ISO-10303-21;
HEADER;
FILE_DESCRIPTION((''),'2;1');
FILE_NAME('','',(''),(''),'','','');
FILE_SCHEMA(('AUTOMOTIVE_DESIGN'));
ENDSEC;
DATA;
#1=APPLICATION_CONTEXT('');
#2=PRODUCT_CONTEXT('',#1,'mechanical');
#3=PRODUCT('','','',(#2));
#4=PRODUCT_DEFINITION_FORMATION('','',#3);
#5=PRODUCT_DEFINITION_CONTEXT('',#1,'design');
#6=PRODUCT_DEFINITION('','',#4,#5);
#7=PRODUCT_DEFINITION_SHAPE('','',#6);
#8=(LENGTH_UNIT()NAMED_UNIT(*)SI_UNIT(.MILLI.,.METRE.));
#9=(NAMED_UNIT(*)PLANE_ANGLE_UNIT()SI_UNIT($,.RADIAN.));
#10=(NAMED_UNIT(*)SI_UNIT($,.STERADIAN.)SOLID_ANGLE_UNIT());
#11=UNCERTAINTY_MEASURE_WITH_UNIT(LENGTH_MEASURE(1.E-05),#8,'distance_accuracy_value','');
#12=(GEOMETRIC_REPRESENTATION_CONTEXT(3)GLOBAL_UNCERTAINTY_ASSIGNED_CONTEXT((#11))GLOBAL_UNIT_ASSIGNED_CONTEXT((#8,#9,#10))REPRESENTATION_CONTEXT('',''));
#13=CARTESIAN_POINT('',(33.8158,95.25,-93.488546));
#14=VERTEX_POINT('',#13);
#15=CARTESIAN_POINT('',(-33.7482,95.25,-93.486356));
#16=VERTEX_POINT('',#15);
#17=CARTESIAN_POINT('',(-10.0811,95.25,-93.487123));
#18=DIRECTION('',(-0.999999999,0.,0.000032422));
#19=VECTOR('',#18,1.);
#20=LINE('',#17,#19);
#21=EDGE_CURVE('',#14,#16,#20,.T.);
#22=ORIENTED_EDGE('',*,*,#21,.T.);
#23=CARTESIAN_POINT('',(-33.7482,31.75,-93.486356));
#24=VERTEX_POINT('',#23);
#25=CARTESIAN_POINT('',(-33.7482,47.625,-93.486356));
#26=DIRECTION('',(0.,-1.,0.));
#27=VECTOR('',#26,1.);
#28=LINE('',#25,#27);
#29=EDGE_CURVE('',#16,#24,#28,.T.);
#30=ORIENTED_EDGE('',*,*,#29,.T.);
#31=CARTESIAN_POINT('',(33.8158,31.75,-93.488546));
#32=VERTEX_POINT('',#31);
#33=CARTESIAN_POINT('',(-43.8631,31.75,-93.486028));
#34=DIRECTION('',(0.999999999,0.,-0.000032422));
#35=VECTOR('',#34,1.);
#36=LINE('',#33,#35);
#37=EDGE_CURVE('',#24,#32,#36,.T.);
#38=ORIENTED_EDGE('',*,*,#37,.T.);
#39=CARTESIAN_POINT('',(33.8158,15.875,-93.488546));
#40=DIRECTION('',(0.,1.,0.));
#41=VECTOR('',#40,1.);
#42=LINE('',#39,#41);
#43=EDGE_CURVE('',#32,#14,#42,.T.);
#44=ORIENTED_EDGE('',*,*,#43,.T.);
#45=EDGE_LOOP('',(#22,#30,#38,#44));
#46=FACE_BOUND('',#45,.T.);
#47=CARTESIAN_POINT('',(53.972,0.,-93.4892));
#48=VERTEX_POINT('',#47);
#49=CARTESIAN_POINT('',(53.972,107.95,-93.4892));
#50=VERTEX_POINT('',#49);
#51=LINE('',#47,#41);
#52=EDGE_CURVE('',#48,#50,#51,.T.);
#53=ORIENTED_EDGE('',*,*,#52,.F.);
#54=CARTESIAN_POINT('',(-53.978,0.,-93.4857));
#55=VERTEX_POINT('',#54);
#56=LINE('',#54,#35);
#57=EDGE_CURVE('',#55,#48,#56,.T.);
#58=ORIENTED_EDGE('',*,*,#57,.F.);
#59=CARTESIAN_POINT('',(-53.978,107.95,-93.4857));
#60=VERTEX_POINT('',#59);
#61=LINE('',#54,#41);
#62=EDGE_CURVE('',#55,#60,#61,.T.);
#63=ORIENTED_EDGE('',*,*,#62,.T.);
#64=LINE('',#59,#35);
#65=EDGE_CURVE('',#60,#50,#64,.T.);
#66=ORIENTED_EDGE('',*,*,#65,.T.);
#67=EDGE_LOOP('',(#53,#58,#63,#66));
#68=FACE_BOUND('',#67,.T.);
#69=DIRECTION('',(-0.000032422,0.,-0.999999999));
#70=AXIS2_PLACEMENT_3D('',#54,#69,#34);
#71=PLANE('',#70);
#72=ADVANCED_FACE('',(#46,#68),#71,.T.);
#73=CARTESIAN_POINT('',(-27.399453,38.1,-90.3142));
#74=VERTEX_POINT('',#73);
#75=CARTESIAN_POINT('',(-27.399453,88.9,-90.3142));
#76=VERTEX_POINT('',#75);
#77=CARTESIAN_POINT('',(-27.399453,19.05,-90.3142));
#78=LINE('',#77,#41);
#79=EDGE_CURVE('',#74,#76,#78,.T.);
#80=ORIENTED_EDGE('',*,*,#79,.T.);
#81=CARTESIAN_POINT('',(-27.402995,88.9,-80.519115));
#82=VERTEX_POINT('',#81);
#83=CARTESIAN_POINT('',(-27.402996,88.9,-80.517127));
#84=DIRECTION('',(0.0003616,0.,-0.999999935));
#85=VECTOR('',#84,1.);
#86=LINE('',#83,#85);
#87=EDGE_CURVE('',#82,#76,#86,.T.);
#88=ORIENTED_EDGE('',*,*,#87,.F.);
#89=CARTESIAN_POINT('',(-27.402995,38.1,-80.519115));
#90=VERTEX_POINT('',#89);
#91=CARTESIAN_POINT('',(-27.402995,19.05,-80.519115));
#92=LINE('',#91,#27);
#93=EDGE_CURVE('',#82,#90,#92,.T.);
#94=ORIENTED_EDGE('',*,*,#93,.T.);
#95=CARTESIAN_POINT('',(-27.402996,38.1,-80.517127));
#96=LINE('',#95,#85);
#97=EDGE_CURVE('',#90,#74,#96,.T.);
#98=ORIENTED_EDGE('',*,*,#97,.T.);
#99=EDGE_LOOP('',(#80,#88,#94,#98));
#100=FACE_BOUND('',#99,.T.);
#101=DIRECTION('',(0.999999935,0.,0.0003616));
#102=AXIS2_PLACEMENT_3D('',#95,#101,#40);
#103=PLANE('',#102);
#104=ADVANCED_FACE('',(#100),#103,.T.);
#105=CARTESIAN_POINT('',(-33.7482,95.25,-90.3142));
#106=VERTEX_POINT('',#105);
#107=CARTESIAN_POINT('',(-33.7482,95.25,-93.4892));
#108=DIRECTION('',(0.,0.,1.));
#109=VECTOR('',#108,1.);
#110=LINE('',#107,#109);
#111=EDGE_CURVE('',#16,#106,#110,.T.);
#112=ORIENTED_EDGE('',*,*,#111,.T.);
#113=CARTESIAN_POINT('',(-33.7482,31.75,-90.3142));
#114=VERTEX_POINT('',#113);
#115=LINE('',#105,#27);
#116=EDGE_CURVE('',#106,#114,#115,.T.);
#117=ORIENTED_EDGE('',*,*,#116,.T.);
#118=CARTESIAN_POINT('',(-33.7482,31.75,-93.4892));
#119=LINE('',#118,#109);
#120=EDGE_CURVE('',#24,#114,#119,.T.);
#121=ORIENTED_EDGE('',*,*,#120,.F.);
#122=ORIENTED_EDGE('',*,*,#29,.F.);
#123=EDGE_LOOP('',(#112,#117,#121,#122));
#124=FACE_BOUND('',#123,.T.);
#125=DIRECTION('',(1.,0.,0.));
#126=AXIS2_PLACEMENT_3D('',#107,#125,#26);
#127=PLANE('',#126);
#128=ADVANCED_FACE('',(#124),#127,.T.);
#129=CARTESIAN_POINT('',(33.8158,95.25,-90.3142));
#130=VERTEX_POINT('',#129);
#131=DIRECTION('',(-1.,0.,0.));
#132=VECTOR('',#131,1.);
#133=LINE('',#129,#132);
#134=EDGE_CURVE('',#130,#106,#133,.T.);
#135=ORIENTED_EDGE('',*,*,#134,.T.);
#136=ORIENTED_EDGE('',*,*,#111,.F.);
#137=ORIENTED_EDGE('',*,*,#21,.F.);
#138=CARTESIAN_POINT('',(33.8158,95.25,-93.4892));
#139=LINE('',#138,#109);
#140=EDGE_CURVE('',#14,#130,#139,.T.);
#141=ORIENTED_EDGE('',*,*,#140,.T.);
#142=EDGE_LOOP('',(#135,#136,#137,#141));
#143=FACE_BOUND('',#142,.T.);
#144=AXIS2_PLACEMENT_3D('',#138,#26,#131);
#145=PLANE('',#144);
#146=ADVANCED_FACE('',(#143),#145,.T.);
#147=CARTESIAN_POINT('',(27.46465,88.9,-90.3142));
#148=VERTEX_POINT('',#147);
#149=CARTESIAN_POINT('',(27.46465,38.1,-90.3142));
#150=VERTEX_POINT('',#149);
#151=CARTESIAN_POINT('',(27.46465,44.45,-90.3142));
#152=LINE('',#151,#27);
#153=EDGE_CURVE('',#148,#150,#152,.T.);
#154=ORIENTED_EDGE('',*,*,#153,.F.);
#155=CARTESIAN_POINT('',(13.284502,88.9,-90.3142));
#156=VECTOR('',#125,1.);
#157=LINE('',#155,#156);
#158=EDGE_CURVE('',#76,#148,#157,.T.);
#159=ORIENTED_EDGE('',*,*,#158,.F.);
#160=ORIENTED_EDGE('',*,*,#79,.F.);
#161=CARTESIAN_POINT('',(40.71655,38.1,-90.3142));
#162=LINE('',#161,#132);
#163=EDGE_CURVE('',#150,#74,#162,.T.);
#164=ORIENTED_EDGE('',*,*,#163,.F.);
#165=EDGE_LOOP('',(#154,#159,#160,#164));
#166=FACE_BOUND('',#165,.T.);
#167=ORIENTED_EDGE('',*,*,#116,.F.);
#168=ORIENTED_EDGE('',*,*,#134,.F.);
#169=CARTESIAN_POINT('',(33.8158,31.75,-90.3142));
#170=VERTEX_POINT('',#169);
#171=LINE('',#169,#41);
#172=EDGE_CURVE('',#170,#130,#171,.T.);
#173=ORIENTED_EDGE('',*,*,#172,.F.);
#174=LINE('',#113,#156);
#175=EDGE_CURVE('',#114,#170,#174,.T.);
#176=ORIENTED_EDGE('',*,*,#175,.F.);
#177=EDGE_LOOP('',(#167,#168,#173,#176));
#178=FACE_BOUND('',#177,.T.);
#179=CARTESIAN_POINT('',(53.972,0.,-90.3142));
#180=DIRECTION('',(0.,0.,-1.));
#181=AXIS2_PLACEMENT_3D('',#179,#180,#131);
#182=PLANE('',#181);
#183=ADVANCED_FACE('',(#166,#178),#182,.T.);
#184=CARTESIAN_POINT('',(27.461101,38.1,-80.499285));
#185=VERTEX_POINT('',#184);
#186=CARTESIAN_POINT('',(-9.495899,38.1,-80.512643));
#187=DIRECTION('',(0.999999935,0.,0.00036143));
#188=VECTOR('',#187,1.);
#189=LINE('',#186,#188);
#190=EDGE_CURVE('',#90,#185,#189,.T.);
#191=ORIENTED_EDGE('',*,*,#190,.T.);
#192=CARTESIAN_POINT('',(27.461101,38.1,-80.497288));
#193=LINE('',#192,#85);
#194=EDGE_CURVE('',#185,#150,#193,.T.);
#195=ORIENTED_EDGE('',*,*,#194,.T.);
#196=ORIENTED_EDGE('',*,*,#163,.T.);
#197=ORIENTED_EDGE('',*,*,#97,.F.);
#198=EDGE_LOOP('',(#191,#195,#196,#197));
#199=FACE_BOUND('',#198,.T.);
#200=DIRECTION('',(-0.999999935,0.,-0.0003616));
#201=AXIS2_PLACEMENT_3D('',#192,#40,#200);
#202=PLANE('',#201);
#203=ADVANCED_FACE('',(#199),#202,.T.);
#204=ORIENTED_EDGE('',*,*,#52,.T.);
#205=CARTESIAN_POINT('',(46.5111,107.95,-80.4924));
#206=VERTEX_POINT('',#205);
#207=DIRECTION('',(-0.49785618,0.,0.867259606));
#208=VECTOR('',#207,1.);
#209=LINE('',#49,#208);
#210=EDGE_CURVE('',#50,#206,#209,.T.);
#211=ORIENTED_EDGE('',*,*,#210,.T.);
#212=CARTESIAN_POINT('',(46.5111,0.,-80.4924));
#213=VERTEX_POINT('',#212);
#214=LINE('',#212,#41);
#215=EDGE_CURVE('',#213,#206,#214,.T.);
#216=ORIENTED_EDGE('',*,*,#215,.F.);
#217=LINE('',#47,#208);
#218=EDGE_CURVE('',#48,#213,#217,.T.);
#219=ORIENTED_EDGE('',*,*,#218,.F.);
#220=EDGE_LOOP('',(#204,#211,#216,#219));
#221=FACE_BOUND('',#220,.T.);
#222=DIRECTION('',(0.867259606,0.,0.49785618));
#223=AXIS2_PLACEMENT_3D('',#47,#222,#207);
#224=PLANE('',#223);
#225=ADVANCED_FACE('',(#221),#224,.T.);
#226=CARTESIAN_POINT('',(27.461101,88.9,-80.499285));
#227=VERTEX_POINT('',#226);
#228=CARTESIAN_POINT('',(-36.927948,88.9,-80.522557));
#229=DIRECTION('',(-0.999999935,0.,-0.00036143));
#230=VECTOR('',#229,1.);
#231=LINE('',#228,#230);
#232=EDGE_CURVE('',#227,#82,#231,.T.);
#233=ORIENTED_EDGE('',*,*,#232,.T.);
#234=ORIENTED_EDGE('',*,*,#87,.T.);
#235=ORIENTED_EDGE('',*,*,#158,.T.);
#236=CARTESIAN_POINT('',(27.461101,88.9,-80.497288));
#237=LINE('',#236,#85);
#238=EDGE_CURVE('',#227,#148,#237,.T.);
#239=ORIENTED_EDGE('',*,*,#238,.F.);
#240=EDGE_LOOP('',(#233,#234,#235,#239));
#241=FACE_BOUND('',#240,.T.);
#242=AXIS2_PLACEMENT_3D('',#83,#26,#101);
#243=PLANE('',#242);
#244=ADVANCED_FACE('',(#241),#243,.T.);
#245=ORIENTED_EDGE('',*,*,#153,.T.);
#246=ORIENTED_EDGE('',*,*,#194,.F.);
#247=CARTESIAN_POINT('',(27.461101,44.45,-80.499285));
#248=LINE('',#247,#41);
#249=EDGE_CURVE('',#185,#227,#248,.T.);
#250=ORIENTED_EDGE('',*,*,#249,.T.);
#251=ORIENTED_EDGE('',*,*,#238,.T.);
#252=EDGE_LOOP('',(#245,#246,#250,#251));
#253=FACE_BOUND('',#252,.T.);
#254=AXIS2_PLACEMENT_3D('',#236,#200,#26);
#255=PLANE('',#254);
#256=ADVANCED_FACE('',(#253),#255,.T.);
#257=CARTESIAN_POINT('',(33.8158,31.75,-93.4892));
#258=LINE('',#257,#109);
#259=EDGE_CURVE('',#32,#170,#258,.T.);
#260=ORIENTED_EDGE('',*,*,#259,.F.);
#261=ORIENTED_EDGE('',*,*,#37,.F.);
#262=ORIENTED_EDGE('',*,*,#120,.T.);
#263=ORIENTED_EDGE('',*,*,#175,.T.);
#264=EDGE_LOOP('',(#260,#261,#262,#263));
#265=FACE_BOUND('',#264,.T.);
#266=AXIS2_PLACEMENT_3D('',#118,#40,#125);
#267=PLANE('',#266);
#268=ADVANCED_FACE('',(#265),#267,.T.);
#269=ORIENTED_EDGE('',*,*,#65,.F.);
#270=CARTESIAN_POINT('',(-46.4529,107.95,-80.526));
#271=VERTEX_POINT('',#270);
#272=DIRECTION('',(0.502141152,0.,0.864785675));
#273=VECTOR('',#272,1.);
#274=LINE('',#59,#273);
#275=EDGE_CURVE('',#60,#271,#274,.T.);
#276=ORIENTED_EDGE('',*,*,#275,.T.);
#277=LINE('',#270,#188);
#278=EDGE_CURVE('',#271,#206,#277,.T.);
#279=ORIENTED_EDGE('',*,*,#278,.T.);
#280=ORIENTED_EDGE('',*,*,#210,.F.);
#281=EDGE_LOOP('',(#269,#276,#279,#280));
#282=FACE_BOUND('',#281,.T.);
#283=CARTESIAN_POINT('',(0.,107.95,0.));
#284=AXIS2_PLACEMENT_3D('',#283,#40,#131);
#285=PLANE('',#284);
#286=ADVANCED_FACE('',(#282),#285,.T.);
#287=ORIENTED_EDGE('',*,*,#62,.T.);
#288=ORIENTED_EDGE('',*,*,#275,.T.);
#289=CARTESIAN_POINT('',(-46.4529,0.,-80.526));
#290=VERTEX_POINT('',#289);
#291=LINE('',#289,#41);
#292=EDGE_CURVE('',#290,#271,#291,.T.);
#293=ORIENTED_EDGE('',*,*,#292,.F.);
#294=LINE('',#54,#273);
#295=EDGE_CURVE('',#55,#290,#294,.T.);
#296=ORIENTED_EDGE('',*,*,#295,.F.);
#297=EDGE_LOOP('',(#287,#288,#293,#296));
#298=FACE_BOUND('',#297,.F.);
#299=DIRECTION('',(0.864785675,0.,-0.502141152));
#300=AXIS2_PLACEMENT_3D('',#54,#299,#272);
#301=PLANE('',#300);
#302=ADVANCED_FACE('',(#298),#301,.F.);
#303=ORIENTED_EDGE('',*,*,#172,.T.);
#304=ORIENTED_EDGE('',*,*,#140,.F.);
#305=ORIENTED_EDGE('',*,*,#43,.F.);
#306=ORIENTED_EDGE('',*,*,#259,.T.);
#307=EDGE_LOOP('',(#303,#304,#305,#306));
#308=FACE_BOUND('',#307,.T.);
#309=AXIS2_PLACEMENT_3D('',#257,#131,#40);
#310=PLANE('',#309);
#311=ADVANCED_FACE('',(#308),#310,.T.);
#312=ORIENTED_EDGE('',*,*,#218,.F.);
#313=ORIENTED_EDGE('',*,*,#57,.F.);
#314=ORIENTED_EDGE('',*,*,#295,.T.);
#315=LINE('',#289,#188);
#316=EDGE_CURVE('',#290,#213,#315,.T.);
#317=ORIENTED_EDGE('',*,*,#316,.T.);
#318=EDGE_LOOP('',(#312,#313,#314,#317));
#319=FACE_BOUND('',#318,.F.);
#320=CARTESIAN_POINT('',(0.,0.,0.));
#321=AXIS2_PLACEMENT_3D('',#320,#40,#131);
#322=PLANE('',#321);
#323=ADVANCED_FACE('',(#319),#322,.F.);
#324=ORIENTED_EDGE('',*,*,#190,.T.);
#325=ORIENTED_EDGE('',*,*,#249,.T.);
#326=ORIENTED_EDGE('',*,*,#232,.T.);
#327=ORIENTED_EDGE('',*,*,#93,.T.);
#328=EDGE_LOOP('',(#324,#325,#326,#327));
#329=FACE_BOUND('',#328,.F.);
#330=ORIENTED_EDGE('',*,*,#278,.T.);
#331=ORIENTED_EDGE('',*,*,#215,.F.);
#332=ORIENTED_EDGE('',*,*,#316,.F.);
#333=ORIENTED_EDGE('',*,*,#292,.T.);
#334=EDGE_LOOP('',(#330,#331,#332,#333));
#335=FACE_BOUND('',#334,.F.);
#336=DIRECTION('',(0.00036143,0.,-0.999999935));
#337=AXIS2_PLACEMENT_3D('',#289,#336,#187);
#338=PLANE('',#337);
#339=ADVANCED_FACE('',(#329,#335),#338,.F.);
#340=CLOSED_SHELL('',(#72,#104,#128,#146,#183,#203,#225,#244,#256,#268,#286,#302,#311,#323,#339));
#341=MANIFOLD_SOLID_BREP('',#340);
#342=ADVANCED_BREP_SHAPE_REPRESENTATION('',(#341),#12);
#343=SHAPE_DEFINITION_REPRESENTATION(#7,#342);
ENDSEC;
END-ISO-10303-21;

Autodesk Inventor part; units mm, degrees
ref_plane "YZ Plane" through (0, 0, 0) normal (1, 0, 0) x (0, 1, 0)
ref_plane "XZ Plane" through (0, 0, 0) normal (0, 1, 0) x (-1, 0, 0)
ref_plane "XY Plane" through (0, 0, 0) normal (0, 0, 1) x (1, 0, 0)
sketch "Sketch1" plane through (0, 0, 0) normal (0, 1, 0) x (-1, 0, 0)
  line L0 (-107.95, -0.0035) -> (-53.978, 93.4857)
  line L1 (-53.978, 93.4857) -> (53.972, 93.4892)
  line L2 (53.972, 93.4892) -> (107.95, 0.0035)
  line L3 (107.95, 0.0035) -> (53.978, -93.4857)
  line L4 (53.978, -93.4857) -> (-53.972, -93.4892)
  line L5 (-53.972, -93.4892) -> (-107.95, -0.0035)
  line L6 (-92.964, 0.0336) -> (-46.4529, 80.526)
  line L7 (-46.4529, 80.526) -> (46.5111, 80.4924)
  line L8 (46.5111, 80.4924) -> (92.964, -0.0336)
  line L9 (92.964, -0.0336) -> (46.4529, -80.526)
  line L10 (46.4529, -80.526) -> (-46.5111, -80.4924)
  line L11 (-46.5111, -80.4924) -> (-92.964, 0.0336)
  line L12 (53.978, -93.4857) -> (46.4529, -80.526)
  line L13 (-53.972, -93.4892) -> (-46.5111, -80.4924)
  point P0 (0, 0)
  point P1 (0, 0)
  point P2 (0, 0)
  point P3 (0, 0)
  dimension "d0" = 215.9
  dimension "d1" = 14.986
extrude "Extrusion1" add sketch "Sketch1" along normal blind 107.95 contours L13 L10 L12 L4
sketch "Sketch2" plane through (46.5111, 0, -80.4924) normal (-0.0003616, 0, 0.9999999) x (0.9999999, 0, 0.0003616)
  line L0 (-92.9641, 0) -> (-92.9641, 107.95) projected
  line L1 (-92.9641, 107.95) -> (0, 107.95) projected
  line L2 (-92.9641, 0) -> (0, 0) projected
  line L3 (0, 0) -> (0, 107.95) projected
  line L4 (-73.9141, 88.9) -> (-19.05, 88.9)
  line L5 (-19.05, 88.9) -> (-19.05, 38.1)
  line L6 (-19.05, 38.1) -> (-73.9141, 38.1)
  line L7 (-73.9141, 38.1) -> (-73.9141, 88.9)
  point P0 (-46.482, 0)
  dimension "d4" = 19.05
  dimension "d5" = 19.05
  dimension "d6" = 38.1
  dimension "d7" = 19.05
extrude "Extrusion2" cut sketch "Sketch2" against normal up to surface (12.9965 mm away) contours L4 L5 L6 L7
sketch "Sketch3" plane through (53.972, 0, -93.4892) normal (-0.000032, 0, -1) x (-1, 0, 0.000032)
  line L0 (0, 107.95) -> (107.95, 107.95) projected
  line L1 (0, 0) -> (0, 107.95) projected
  line L2 (26.5062, 88.9) -> (81.3702, 88.9) projected
  line L3 (26.5062, 38.1) -> (26.5062, 88.9) projected
  line L4 (81.3702, 88.9) -> (81.3702, 38.1) projected
  line L5 (81.3702, 38.1) -> (26.5062, 38.1) projected
  line L6 (20.1562, 95.25) -> (87.7202, 95.25)
  line L7 (87.7202, 95.25) -> (87.7202, 31.75)
  line L8 (87.7202, 31.75) -> (20.1562, 31.75)
  line L9 (20.1562, 31.75) -> (20.1562, 95.25)
  point P0 (53.975, 0)
  dimension "d12" = 6.35
  dimension "d13" = 6.35
  dimension "d14" = 6.35
  dimension "d15" = 6.35
extrude "Extrusion3" cut sketch "Sketch3" against normal blind 3.175 contours L2 L4 L5 L3 | L6 L7 L8 L9
equation "\"d7\" = d4"
equation "\"d14\" = d13"
equation "\"d15\" = d12"
properties part number "SatelliteSideWallSensor_v2"
